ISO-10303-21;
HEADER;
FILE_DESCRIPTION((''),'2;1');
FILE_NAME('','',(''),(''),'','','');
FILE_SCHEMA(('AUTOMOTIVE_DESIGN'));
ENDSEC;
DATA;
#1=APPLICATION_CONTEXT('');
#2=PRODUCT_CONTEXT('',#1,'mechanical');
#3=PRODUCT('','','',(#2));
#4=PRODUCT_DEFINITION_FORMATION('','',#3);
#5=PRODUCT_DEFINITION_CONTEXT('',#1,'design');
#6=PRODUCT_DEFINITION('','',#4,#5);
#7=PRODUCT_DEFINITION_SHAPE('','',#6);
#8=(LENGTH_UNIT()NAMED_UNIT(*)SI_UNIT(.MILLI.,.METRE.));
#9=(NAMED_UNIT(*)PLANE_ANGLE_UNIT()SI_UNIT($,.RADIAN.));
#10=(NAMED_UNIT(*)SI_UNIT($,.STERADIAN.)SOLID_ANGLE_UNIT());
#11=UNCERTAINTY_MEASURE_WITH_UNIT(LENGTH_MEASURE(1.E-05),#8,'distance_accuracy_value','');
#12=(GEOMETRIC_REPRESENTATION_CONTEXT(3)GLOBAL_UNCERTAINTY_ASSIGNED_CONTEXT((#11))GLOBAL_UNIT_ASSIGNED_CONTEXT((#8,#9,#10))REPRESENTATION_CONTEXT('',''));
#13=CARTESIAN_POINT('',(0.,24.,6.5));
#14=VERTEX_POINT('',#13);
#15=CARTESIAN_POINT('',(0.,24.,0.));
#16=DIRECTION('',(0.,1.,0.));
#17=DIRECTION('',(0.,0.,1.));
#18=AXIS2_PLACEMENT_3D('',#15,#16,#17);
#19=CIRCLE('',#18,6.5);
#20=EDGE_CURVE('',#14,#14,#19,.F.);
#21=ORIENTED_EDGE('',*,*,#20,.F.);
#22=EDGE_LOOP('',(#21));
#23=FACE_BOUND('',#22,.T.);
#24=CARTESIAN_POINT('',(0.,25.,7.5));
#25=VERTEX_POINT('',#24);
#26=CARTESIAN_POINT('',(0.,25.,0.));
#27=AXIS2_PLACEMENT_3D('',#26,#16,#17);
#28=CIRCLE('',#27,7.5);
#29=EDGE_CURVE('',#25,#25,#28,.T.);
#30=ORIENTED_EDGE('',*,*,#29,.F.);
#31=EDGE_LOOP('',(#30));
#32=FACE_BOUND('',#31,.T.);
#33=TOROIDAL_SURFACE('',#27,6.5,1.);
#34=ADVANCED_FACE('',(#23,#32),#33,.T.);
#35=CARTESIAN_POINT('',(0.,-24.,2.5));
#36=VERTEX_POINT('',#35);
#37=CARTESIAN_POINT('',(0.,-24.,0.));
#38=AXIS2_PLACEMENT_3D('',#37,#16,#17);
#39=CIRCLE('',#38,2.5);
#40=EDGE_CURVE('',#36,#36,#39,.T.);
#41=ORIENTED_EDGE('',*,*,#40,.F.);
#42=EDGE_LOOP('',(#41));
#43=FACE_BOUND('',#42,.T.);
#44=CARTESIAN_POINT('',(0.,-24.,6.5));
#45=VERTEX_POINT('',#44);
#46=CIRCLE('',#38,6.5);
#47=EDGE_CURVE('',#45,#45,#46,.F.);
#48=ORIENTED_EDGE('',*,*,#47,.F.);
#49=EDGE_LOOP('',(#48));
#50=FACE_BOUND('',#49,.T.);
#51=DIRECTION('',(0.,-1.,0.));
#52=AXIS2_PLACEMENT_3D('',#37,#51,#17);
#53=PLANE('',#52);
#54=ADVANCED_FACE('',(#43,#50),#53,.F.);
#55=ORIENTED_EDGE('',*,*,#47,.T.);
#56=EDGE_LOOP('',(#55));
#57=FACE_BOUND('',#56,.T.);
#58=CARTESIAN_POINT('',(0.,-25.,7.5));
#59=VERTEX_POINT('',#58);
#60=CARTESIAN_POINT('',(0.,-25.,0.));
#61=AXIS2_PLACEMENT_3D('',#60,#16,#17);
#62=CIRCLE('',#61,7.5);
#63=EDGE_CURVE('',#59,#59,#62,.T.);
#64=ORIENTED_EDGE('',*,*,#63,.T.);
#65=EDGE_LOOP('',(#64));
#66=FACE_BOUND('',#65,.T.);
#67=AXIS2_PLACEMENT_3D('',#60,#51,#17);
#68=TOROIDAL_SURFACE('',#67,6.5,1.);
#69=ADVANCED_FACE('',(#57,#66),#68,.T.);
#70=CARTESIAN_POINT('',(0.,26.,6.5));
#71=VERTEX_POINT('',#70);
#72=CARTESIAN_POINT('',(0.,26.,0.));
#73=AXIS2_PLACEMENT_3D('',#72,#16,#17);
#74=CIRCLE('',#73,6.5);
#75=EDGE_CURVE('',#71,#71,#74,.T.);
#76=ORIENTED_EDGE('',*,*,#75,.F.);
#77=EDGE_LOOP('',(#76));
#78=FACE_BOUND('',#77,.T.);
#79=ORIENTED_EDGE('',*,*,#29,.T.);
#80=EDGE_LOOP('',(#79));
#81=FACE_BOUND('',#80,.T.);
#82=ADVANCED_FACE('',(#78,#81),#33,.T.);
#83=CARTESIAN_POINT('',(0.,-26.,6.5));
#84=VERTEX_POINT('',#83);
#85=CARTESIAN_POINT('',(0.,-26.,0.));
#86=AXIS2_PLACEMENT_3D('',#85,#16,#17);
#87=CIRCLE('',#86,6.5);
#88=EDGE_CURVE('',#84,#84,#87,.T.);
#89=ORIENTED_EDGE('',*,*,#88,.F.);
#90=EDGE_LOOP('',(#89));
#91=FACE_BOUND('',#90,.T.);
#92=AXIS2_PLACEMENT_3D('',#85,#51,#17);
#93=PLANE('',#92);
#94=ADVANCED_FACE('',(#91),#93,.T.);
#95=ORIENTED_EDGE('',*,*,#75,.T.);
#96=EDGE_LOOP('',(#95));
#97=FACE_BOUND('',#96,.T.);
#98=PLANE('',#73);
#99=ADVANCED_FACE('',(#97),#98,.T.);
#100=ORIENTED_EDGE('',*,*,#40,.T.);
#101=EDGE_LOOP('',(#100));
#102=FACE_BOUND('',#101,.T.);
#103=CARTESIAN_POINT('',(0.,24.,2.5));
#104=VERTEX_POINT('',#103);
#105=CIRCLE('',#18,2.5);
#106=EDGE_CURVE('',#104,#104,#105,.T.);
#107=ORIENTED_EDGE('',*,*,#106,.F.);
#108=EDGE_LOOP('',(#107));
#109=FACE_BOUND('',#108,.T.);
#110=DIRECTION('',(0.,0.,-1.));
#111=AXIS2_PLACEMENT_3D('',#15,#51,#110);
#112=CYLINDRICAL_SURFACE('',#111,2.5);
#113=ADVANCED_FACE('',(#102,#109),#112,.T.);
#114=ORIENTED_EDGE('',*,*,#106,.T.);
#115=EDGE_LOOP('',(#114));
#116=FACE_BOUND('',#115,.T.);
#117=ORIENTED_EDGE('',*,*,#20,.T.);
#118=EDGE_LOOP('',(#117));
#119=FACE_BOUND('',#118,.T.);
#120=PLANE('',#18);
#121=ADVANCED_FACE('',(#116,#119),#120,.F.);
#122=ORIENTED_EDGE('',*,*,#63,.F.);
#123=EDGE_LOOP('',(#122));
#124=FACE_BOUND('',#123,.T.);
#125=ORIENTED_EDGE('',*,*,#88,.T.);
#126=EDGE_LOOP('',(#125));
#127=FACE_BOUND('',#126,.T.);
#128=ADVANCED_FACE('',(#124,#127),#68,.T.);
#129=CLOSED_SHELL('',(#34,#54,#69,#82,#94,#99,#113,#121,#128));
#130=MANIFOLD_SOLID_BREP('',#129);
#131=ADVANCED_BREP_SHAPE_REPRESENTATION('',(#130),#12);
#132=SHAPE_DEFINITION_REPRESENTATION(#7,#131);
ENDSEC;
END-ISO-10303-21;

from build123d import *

# Parameters (mm, degrees)
SKETCH1_R           = 2.5
BOSS_EXTRUDE1_DEPTH = 24
SKETCH2_R           = 7.5
BOSS_EXTRUDE2_DEPTH = 2
FILLET1_R           = 1


with BuildPart() as part:
    # Sketch1 → Boss-Extrude1 (new body)
    with BuildSketch(Plane(origin=(0, 0, 0), x_dir=(1, 0, 0), z_dir=(0, 1, 0))):
        with Locations(Location((0, 0, 0), (0, 0, 270))):
            Circle(SKETCH1_R)
    extrude(amount=BOSS_EXTRUDE1_DEPTH)

    # Sketch2 → Boss-Extrude2 (add)
    with BuildSketch(Plane(origin=(0, 24, 0), x_dir=(1, 0, 0), z_dir=(0, 1, 0))):
        with Locations(Location((0, 0, 0), (0, 0, 270))):
            Circle(SKETCH2_R)
    extrude(amount=BOSS_EXTRUDE2_DEPTH)

    # Fillet1
    fillet1_edges = [part.edges().sort_by_distance(p)[0] for p in [
        (0, 24, -7.5),
        (0, 26, -7.5),
    ]]
    fillet(fillet1_edges, radius=FILLET1_R - 0.0001)  # a hair under: the kernel refuses the full size

    # Mirror1: part across plane


with BuildPart() as part_1:
    add(part.part)
    add(part.part.mirror(Plane.ZX))


solid = part_1.part
